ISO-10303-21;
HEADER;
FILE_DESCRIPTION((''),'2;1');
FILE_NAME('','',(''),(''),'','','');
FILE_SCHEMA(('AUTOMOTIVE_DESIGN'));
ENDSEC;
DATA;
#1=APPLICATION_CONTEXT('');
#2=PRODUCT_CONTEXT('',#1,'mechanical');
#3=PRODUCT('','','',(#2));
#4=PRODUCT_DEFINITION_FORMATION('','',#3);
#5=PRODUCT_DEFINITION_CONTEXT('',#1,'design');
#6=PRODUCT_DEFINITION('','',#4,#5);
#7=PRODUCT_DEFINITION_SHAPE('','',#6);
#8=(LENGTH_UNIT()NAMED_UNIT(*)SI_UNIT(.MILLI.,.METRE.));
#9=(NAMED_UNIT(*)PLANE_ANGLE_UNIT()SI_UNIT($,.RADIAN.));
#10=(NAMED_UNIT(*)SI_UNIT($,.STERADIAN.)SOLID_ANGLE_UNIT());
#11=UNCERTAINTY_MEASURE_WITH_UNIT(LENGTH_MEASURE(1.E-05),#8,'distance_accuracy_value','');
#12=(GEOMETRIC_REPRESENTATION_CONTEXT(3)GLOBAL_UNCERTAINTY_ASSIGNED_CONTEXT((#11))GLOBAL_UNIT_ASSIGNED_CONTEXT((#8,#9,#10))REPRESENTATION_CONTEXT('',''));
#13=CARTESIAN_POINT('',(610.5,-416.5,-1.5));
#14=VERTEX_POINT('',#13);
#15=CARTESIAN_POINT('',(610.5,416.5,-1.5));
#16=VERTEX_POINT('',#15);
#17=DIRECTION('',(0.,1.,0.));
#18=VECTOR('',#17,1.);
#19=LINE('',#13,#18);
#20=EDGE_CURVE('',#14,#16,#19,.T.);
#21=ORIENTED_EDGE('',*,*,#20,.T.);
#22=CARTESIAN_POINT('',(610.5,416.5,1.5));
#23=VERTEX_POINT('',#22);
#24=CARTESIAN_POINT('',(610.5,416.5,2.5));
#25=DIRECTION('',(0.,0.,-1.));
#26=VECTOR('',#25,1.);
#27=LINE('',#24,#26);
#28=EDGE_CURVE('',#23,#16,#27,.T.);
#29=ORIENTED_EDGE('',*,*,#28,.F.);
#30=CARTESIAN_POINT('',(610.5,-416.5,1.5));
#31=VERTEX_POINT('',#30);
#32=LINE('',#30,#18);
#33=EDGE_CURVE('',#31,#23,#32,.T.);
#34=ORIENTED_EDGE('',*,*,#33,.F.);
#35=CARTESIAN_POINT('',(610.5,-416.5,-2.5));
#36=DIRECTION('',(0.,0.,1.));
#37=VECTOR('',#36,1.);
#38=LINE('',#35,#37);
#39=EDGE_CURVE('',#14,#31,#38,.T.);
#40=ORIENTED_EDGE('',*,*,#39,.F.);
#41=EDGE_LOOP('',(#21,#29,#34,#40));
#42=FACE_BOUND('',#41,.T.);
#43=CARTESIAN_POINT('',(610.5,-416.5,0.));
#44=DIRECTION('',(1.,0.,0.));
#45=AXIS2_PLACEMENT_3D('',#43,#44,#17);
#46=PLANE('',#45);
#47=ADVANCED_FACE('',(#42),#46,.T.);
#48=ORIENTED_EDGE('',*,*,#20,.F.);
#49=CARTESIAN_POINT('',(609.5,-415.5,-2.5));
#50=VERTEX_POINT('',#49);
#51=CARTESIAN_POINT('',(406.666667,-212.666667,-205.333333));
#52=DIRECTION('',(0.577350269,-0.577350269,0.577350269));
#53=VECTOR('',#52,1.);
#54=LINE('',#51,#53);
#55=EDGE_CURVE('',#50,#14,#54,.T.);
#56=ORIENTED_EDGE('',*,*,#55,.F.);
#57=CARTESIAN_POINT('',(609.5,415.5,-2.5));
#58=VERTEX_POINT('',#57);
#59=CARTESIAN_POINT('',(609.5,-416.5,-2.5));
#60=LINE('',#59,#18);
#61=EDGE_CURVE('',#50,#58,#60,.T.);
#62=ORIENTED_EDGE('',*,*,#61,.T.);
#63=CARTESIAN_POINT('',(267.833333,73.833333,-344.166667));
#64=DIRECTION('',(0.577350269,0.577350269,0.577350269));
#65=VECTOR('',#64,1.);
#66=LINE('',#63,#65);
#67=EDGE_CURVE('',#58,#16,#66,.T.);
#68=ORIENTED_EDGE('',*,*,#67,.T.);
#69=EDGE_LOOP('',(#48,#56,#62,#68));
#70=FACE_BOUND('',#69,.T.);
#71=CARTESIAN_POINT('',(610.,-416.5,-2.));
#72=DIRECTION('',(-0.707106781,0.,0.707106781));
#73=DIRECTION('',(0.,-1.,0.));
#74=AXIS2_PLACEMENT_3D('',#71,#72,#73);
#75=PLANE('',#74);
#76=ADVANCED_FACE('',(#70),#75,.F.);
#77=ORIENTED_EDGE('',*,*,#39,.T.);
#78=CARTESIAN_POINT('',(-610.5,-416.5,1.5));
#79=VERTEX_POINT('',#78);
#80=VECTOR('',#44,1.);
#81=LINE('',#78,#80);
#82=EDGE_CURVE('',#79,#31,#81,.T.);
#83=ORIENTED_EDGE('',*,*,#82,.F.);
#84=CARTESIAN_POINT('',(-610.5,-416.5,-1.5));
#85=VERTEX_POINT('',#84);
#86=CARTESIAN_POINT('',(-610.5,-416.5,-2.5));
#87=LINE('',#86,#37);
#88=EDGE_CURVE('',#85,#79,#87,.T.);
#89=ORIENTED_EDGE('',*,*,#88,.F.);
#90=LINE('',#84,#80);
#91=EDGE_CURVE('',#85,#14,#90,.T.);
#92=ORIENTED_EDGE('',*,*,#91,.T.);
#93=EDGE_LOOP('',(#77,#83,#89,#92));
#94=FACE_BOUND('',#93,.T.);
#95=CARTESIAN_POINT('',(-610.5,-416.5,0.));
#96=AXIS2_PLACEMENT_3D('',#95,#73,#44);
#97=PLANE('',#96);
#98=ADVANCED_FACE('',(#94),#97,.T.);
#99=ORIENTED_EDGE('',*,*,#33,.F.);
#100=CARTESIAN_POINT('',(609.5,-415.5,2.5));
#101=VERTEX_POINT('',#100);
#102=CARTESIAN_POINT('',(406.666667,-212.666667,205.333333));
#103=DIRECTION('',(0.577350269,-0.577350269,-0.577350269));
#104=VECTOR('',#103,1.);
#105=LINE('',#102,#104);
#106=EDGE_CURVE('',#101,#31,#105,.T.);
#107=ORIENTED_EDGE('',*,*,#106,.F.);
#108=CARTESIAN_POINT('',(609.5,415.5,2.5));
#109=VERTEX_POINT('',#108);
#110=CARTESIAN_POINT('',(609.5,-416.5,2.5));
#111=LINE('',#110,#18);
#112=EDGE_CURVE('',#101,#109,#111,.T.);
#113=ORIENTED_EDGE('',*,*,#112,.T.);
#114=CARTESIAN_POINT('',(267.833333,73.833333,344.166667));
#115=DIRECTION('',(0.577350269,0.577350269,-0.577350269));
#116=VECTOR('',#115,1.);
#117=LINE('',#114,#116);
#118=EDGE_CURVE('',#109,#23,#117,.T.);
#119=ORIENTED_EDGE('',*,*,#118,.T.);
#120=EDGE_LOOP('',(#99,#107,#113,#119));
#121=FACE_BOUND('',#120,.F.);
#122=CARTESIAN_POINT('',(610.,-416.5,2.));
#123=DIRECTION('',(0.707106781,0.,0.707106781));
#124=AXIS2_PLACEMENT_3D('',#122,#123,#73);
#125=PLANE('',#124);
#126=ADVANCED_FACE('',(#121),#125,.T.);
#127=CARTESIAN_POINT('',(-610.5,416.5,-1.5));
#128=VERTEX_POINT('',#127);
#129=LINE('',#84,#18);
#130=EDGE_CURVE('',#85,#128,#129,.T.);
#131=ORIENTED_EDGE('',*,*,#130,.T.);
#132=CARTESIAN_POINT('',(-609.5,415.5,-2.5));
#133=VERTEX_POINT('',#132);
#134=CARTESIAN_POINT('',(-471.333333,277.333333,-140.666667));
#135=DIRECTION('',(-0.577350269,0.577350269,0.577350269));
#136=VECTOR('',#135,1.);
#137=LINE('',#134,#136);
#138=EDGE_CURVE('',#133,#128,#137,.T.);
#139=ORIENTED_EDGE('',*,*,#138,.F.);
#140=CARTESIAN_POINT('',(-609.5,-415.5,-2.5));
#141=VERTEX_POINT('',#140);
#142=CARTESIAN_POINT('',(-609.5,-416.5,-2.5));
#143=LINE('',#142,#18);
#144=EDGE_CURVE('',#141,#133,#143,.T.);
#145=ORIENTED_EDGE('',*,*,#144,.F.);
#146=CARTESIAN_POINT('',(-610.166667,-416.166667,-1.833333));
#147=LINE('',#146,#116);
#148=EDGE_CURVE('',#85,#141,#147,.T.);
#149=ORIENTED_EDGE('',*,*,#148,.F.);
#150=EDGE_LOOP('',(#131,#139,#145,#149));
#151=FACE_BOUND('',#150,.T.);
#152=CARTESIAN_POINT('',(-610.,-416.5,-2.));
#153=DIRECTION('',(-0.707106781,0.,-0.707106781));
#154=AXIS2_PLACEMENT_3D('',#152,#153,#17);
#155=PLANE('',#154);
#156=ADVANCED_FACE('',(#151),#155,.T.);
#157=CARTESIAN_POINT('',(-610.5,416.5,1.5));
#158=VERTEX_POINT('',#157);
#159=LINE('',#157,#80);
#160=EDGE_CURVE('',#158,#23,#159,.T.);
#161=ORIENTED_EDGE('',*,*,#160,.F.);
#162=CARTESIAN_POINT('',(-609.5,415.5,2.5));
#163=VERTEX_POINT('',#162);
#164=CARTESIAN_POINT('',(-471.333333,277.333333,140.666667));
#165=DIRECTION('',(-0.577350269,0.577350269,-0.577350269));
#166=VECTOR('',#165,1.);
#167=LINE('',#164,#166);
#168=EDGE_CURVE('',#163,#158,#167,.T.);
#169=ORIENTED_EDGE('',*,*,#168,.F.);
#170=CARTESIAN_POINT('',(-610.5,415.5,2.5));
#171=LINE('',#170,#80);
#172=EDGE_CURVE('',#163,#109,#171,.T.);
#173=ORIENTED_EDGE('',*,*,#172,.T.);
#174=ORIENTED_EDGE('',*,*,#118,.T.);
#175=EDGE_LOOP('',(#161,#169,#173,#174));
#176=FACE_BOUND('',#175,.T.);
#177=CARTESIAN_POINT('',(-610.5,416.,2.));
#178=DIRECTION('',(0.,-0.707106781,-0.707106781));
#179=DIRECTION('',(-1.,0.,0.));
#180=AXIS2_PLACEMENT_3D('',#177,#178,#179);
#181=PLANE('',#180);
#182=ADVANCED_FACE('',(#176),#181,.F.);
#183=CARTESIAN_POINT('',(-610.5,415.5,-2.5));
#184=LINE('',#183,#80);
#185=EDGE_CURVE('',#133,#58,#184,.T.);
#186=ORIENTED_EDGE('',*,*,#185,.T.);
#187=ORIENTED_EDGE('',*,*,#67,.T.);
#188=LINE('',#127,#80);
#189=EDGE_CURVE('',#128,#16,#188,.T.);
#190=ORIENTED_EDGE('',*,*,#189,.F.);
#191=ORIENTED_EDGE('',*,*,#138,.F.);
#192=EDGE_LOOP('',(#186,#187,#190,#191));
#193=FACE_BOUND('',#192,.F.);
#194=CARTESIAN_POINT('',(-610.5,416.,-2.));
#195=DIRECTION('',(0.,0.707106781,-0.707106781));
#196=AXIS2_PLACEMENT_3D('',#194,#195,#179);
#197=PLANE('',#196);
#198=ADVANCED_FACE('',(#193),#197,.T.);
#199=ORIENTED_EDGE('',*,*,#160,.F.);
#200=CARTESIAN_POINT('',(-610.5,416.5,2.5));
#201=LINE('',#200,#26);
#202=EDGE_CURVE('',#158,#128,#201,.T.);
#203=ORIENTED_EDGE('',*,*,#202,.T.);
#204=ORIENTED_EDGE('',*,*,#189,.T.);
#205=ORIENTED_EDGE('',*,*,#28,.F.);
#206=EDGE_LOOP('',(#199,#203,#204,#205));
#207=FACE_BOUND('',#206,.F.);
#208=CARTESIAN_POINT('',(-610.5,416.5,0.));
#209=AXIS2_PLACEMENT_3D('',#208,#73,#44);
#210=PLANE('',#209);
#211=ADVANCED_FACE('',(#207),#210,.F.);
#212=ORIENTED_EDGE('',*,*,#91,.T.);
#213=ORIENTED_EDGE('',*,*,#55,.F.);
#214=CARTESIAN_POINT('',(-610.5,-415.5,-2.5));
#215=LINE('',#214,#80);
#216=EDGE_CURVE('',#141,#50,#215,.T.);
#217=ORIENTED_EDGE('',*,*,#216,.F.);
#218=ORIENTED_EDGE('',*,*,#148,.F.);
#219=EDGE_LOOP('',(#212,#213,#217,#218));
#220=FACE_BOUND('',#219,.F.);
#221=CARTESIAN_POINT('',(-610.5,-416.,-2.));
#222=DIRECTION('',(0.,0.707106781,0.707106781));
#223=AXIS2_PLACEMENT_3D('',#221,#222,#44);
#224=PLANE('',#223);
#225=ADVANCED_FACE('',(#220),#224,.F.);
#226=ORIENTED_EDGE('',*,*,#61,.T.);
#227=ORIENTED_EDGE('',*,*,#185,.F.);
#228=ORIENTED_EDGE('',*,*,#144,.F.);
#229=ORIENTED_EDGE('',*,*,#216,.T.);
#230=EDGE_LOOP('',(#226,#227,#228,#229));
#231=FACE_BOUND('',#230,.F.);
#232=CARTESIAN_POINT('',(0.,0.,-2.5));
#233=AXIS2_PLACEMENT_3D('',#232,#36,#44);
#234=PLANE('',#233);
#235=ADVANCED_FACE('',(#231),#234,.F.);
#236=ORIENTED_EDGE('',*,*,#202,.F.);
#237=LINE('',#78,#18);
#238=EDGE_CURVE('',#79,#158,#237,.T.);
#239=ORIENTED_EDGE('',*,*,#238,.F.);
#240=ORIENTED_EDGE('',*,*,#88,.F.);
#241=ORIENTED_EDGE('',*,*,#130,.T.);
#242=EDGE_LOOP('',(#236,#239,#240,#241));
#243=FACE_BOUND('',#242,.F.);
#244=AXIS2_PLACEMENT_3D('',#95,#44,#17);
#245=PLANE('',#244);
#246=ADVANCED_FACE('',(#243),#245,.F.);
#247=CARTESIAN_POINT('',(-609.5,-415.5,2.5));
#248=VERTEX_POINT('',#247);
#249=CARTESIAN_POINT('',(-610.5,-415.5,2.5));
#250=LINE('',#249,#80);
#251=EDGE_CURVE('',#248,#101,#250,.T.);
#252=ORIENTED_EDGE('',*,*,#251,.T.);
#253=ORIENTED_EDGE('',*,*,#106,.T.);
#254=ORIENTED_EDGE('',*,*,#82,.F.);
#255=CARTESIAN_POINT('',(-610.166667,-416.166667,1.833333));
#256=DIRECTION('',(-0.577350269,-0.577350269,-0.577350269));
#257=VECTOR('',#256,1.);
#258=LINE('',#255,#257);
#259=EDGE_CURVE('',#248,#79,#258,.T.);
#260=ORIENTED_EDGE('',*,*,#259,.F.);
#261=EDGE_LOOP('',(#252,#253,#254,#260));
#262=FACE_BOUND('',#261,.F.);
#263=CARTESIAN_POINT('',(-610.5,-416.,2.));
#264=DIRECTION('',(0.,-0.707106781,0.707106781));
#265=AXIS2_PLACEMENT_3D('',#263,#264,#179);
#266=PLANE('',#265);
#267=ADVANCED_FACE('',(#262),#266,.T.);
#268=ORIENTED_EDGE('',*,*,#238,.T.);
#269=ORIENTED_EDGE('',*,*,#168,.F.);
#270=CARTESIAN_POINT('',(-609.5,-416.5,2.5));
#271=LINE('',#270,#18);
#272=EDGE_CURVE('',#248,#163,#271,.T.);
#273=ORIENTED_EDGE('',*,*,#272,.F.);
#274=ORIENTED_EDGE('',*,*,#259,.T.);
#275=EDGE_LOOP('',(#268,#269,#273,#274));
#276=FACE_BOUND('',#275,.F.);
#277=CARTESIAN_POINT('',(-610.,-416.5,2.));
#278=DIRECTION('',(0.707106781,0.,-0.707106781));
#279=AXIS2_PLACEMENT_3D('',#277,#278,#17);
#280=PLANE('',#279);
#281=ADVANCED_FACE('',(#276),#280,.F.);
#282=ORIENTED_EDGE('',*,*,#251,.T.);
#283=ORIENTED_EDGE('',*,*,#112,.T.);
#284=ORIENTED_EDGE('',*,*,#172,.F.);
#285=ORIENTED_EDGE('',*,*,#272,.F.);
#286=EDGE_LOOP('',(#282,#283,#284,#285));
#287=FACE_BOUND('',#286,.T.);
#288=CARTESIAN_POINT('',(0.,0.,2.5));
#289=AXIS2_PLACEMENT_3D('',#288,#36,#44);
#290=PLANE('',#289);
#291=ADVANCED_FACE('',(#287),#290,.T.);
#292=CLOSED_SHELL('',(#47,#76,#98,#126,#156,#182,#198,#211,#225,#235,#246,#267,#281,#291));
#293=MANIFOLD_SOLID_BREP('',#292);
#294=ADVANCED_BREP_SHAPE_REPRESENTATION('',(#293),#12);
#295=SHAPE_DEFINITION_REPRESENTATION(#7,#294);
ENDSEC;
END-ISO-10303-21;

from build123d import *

# Parameters (mm, degrees)
F0_W     = 1221
F0_H     = 833
F1_DEPTH = 2.5
F2_SIZE  = 1
F3_SIZE  = 1


with BuildPart() as f1:
    # F0 (on Top) → F1 (new body, symmetric)
    with BuildSketch(Plane.XY):
        Rectangle(F0_W, F0_H)
    extrude(amount=F1_DEPTH, both=True)

    # F2
    f2_edges = [f1.edges().sort_by_distance(p)[0] for p in [
        (0, -416.5, 2.5),
        (610.5, 0, 2.5),
        (0, 416.5, 2.5),
        (-610.5, 0, 2.5),
    ]]
    chamfer(f2_edges, length=F2_SIZE)

    # F3
    f3_edges = [f1.edges().sort_by_distance(p)[0] for p in [
        (0, 416.5, -2.5),
        (610.5, 0, -2.5),
        (0, -416.5, -2.5),
        (-610.5, 0, -2.5),
    ]]
    chamfer(f3_edges, length=F3_SIZE)


solid = f1.part
